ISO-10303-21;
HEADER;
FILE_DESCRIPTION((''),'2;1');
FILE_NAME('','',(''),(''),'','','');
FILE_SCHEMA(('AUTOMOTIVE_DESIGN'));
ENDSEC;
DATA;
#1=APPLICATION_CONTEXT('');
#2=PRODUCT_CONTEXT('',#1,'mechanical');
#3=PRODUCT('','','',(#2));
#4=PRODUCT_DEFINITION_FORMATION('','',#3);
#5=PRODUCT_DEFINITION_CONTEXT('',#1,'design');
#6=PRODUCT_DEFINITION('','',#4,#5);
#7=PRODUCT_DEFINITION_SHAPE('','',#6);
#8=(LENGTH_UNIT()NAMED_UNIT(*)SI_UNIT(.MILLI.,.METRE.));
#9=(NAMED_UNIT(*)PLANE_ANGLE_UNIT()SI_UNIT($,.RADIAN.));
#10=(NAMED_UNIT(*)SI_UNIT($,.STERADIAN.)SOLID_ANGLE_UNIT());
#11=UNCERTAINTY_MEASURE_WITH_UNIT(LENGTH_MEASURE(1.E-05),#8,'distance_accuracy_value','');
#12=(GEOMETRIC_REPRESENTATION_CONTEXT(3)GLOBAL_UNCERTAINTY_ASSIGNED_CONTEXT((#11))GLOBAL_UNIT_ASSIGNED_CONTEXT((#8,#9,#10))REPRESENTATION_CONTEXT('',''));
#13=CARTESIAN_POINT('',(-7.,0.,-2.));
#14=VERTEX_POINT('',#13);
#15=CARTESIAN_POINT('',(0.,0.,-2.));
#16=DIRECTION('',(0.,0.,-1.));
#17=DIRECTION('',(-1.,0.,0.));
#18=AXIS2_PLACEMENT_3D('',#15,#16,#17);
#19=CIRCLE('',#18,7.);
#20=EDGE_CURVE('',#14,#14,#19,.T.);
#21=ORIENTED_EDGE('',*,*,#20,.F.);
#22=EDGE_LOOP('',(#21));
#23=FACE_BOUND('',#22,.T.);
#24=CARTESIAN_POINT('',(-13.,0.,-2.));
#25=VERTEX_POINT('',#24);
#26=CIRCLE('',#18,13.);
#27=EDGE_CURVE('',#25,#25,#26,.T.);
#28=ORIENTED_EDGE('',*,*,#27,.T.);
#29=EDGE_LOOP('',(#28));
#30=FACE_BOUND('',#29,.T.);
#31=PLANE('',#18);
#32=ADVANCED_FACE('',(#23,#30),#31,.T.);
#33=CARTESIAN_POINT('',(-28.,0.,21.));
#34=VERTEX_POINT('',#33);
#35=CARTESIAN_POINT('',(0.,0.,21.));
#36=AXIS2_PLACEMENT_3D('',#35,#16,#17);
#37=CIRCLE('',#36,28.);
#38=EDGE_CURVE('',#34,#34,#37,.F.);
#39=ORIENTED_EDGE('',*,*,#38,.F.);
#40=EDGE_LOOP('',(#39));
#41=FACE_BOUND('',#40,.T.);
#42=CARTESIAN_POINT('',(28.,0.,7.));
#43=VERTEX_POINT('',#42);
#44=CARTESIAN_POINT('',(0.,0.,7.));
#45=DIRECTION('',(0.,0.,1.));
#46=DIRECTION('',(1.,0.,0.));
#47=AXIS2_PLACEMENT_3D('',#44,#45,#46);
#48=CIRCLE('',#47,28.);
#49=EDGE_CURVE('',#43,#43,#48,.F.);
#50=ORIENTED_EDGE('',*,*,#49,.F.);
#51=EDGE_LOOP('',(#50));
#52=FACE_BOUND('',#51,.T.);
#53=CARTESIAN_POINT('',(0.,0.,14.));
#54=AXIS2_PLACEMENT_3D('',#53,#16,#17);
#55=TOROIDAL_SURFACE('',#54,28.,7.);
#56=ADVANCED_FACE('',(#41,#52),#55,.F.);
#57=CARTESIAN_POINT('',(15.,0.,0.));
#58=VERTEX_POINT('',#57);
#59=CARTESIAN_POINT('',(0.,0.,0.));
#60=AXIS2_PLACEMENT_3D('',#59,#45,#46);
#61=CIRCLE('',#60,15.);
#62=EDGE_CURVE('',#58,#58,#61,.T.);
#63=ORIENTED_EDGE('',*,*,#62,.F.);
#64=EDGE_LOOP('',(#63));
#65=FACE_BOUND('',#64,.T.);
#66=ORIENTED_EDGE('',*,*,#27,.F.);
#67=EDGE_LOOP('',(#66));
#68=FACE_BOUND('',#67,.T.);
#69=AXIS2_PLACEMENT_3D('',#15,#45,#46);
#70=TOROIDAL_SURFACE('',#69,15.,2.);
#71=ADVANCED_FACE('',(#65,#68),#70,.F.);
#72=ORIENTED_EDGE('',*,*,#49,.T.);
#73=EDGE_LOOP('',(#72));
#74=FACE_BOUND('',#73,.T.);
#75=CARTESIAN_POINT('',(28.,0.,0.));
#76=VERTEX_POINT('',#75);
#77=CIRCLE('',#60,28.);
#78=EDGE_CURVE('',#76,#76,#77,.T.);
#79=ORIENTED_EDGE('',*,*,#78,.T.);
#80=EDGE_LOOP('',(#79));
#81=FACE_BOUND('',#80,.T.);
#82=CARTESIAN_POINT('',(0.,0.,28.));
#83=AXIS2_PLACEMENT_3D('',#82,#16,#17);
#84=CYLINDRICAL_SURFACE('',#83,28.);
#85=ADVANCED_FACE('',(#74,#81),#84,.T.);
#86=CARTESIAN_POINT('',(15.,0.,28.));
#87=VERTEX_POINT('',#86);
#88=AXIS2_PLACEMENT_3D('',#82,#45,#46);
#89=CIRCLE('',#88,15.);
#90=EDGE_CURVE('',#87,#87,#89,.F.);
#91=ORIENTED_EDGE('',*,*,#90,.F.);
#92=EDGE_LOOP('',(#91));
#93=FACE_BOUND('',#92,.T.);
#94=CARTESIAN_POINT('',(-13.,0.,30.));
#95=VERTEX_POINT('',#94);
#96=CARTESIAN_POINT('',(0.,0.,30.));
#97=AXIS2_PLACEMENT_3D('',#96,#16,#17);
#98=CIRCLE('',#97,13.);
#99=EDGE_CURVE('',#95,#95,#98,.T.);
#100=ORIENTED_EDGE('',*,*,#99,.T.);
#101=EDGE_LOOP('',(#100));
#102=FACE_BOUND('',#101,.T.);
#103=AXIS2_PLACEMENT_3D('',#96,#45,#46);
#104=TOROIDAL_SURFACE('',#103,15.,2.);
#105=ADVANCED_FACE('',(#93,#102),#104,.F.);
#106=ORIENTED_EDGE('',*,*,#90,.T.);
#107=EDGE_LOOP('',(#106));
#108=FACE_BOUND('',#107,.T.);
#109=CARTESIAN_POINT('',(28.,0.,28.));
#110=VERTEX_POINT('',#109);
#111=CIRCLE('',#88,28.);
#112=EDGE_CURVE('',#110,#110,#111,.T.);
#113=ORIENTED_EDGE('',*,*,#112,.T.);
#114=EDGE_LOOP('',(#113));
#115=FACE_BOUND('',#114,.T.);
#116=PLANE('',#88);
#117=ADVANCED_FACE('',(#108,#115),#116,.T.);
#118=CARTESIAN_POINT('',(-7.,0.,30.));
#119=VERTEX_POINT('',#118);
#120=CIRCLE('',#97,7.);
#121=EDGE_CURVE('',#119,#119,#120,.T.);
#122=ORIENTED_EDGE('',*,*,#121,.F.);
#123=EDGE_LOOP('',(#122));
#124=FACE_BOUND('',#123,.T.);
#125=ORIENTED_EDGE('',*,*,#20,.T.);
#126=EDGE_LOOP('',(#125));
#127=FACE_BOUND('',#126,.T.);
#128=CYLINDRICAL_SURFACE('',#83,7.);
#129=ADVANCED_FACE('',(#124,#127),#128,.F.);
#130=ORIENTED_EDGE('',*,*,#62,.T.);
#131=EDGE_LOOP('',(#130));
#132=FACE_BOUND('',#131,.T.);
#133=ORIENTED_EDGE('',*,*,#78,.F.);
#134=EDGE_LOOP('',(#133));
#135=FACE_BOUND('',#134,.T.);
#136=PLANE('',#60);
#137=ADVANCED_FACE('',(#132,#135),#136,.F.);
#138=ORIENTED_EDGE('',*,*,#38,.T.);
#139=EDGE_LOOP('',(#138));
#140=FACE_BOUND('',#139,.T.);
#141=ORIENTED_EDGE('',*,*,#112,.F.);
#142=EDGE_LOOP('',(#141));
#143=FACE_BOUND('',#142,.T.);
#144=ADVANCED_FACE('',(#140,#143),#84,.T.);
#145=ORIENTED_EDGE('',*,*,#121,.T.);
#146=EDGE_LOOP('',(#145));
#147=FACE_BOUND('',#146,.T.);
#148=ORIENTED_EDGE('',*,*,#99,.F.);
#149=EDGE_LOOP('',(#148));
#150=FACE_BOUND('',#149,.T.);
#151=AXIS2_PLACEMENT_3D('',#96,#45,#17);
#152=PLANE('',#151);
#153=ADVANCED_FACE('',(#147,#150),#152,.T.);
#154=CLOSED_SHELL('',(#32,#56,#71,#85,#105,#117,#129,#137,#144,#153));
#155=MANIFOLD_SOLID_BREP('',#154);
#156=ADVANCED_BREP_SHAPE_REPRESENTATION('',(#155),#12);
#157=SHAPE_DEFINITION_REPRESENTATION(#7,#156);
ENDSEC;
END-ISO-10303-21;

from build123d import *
from build123d.topology import SkipClean

# Parameters (mm, degrees)
SKETCH1_R           = 28
SKETCH1_R_2         = 7
BOSS_EXTRUDE1_DEPTH = 28
BOSS_EXTRUDE2_START = 2
SKETCH2_R           = 13
SKETCH2_R_2         = 7
BOSS_EXTRUDE2_DEPTH = 2
SKETCH3_R           = 7
FILLET1_R           = 2
FILLET2_R           = 2


with BuildPart() as part:
    # Sketch1 → Boss-Extrude1 (new body)
    with BuildSketch(Plane.XY):
        Circle(SKETCH1_R)
        Circle(SKETCH1_R_2, mode=Mode.SUBTRACT)
    extrude(amount=BOSS_EXTRUDE1_DEPTH)

    # Sketch2 → Boss-Extrude2 (add)
    with SkipClean():  # the faces are left unmerged after this step: merging them gives an invalid solid
        with BuildSketch(Plane(origin=(0, 0, 0), x_dir=(-1, 0, 0), z_dir=(0, 0, -1)).offset(BOSS_EXTRUDE2_START)):
            with Locations(Location((0, 0, 0), (0, 0, 180))):
                Circle(SKETCH2_R)
            Circle(SKETCH2_R_2, mode=Mode.SUBTRACT)
        boss_extrude2 = extrude(amount=-BOSS_EXTRUDE2_DEPTH)

    # Mirror1: Boss-Extrude2 across plane
    add(boss_extrude2.mirror(Plane.XY.offset(14)))

    # Sketch3 → Cut-Revolve1 (revolve, cut)
    with BuildSketch(Plane(origin=(0, 0, 0), x_dir=(0, 0, -1), z_dir=(1, 0, 0)), mode=Mode.PRIVATE) as cut_revolve1_sk:
        with Locations((-14, 28)):
            Circle(SKETCH3_R)
    revolve(cut_revolve1_sk.sketch.rotate(Axis((0, 0, 0), (0, 0, 1)), 90), axis=Axis((0, 0, 0), (0, 0, 1)), mode=Mode.SUBTRACT)

    # Fillet1
    fillet1_edges = [part.edges().sort_by_distance(p)[0] for p in [
        (-13, 0, 0),
    ]]
    fillet(fillet1_edges, radius=FILLET1_R - 0.0001)  # a hair under: the kernel refuses the full size

    # Fillet2
    fillet2_edges = [part.edges().sort_by_distance(p)[0] for p in [
        (-13, 0, 28),
    ]]
    fillet(fillet2_edges, radius=FILLET2_R - 0.0001)  # a hair under: the kernel refuses the full size


solid = part.part
